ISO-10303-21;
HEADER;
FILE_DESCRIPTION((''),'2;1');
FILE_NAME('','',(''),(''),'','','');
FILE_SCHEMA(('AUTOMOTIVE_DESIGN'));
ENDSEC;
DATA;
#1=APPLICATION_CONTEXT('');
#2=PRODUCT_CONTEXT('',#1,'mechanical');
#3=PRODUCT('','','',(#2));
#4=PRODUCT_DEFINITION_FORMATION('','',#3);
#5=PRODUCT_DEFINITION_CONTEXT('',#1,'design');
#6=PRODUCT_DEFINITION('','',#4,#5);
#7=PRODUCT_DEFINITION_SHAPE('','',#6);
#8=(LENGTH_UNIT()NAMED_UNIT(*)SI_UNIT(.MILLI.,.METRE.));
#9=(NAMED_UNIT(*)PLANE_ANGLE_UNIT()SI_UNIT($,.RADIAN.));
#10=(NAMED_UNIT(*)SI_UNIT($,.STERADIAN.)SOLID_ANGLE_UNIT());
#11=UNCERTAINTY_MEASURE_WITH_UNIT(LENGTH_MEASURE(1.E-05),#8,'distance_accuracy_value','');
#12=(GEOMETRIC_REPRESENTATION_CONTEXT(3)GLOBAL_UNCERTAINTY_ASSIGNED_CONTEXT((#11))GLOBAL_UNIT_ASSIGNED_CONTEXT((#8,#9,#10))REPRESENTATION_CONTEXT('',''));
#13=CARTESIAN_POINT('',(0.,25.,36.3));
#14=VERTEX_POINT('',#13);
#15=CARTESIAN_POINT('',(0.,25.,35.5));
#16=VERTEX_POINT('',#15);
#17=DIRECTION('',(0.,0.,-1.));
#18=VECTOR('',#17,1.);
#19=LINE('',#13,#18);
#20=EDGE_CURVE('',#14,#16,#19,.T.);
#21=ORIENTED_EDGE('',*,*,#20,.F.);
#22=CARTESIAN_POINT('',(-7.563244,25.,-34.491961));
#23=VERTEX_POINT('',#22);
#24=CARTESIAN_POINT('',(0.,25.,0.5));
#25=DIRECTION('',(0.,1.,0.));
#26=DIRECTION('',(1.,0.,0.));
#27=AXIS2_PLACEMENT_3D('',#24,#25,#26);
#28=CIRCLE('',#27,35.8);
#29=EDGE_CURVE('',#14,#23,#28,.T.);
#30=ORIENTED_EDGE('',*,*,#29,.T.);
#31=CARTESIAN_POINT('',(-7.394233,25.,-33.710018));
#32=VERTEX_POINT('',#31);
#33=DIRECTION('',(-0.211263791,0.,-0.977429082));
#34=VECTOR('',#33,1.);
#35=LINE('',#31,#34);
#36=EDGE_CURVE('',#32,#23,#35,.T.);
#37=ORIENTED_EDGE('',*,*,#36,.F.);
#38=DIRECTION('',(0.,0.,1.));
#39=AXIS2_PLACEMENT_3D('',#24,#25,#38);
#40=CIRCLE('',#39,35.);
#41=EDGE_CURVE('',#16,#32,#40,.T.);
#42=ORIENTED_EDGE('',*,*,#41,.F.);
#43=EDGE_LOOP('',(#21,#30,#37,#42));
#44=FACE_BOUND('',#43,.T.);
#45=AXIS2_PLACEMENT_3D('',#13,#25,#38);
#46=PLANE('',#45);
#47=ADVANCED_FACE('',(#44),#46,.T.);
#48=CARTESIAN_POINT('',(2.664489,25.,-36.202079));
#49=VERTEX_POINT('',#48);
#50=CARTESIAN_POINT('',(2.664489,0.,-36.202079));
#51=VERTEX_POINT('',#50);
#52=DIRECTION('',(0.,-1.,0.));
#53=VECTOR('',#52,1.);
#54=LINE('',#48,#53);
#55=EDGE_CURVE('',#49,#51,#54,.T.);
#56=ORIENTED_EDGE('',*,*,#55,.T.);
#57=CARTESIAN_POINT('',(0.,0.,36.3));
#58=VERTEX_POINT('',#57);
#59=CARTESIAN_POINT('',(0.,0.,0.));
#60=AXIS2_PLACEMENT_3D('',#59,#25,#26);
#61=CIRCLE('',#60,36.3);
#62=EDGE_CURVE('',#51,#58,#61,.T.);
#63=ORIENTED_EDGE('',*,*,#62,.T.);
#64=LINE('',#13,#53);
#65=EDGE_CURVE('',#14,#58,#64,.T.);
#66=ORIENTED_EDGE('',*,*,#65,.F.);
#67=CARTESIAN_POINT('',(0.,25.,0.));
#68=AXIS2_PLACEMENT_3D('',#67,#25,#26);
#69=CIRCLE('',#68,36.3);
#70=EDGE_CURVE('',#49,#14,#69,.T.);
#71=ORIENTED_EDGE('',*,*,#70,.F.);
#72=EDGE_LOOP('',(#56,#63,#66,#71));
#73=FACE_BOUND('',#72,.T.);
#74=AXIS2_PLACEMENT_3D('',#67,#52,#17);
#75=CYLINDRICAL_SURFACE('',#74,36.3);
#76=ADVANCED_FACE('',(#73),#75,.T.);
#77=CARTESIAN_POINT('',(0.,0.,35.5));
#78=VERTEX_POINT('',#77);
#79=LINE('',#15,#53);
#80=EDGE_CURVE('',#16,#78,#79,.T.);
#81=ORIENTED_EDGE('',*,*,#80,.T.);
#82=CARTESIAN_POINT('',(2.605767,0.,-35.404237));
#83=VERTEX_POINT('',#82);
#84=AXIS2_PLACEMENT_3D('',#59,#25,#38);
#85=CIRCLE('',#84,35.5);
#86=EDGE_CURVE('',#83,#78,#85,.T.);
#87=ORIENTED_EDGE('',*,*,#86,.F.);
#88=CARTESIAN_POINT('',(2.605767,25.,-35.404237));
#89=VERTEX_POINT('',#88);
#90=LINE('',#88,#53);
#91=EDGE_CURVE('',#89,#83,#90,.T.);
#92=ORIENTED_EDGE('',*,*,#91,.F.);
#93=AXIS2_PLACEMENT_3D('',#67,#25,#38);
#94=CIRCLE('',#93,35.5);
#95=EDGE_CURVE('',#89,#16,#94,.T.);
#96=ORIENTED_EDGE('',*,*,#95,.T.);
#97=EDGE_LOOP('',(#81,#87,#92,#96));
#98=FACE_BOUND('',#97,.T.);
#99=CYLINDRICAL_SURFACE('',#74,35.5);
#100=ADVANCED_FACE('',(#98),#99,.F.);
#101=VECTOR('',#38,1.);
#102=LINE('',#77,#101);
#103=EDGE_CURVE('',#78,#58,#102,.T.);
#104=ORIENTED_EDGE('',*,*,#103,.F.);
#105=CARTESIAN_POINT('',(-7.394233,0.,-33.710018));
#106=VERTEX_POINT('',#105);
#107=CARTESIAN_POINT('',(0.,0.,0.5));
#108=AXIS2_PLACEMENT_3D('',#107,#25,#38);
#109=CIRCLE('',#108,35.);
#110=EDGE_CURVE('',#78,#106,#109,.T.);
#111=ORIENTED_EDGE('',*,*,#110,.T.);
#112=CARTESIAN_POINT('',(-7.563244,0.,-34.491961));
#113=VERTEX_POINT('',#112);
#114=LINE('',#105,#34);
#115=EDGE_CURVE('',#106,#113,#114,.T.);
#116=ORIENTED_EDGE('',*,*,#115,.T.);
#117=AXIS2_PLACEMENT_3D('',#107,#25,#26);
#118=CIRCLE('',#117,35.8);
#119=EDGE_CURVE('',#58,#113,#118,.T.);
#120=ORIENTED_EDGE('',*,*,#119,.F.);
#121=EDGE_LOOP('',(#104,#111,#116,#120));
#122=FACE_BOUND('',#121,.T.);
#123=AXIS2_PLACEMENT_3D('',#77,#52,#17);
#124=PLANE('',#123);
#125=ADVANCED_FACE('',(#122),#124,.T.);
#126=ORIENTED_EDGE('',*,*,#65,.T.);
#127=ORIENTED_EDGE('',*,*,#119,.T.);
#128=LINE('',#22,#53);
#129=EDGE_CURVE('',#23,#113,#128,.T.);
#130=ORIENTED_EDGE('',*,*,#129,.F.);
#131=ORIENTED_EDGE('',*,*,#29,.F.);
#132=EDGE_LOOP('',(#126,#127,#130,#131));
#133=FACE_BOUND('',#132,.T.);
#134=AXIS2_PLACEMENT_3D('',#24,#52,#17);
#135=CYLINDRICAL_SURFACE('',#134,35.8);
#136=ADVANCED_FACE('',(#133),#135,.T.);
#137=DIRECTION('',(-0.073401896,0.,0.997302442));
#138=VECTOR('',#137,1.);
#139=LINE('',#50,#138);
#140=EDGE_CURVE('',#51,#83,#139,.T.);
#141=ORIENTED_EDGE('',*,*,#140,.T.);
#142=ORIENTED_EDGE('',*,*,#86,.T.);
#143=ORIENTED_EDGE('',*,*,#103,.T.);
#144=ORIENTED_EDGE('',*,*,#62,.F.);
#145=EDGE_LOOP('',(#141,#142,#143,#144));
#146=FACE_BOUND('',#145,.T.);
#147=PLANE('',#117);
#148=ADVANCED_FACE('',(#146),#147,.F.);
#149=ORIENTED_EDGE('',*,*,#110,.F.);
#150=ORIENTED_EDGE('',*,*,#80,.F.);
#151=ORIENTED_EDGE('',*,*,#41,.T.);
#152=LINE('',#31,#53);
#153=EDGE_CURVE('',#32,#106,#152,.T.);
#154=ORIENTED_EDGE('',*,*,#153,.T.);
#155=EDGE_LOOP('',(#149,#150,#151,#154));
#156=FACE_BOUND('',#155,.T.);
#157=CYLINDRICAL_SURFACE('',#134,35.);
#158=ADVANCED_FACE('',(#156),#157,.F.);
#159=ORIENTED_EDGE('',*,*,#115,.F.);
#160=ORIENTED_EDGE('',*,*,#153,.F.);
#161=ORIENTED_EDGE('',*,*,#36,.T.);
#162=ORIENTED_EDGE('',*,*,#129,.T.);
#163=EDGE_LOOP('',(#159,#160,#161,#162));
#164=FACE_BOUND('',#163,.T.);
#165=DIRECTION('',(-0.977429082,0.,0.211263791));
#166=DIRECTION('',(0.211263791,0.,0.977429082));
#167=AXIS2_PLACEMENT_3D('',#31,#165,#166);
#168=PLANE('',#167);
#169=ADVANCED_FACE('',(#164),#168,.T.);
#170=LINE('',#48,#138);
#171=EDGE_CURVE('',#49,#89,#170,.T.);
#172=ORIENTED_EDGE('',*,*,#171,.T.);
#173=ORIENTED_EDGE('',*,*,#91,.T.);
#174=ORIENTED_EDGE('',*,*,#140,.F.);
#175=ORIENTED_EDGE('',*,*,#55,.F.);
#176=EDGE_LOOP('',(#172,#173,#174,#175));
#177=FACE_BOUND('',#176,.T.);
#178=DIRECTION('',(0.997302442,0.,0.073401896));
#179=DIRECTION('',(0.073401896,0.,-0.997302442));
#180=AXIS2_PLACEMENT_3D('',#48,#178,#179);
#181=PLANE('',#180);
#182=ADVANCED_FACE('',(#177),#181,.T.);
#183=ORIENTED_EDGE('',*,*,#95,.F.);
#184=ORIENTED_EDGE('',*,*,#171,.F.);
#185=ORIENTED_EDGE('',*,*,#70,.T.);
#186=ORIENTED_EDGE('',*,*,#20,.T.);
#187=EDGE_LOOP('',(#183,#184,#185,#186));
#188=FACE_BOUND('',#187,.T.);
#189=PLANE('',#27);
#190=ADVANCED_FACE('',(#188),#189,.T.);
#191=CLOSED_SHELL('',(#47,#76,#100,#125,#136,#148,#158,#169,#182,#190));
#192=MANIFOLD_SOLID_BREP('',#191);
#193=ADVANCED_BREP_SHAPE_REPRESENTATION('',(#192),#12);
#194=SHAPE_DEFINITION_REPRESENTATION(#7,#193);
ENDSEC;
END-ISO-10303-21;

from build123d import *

# Parameters (mm, degrees)
BASE_FLANGE1_DEPTH = 25


# Sheet-metal steps are written as plain solids
with BuildPart() as part:
    # Sketch1 → Base-Flange1 (new body)
    with BuildSketch(Plane(origin=(0, 0, 0), x_dir=(1, 0, 0), z_dir=(0, 1, 0))):
        with BuildLine():
            ThreePointArc((2.605767321, 35.404236705), (-35.476051098, 1.303763201), (0, -35.5))
            ThreePointArc((0, -35.5), (34.801944096, 3.21815642), (-7.394232679, 33.710017876))
            Line((-7.394232679, 33.710017876), (-7.563243712, 34.491961142))
            ThreePointArc((-7.563243712, 34.491961142), (35.597417103, 3.303142853), (0, -36.3))
            ThreePointArc((0, -36.3), (-36.275511405, 1.33314378), (2.664488838, 36.202078659))
            Line((2.664488838, 36.202078659), (2.605767321, 35.404236705))
        make_face()
    extrude(amount=BASE_FLANGE1_DEPTH)


solid = part.part
